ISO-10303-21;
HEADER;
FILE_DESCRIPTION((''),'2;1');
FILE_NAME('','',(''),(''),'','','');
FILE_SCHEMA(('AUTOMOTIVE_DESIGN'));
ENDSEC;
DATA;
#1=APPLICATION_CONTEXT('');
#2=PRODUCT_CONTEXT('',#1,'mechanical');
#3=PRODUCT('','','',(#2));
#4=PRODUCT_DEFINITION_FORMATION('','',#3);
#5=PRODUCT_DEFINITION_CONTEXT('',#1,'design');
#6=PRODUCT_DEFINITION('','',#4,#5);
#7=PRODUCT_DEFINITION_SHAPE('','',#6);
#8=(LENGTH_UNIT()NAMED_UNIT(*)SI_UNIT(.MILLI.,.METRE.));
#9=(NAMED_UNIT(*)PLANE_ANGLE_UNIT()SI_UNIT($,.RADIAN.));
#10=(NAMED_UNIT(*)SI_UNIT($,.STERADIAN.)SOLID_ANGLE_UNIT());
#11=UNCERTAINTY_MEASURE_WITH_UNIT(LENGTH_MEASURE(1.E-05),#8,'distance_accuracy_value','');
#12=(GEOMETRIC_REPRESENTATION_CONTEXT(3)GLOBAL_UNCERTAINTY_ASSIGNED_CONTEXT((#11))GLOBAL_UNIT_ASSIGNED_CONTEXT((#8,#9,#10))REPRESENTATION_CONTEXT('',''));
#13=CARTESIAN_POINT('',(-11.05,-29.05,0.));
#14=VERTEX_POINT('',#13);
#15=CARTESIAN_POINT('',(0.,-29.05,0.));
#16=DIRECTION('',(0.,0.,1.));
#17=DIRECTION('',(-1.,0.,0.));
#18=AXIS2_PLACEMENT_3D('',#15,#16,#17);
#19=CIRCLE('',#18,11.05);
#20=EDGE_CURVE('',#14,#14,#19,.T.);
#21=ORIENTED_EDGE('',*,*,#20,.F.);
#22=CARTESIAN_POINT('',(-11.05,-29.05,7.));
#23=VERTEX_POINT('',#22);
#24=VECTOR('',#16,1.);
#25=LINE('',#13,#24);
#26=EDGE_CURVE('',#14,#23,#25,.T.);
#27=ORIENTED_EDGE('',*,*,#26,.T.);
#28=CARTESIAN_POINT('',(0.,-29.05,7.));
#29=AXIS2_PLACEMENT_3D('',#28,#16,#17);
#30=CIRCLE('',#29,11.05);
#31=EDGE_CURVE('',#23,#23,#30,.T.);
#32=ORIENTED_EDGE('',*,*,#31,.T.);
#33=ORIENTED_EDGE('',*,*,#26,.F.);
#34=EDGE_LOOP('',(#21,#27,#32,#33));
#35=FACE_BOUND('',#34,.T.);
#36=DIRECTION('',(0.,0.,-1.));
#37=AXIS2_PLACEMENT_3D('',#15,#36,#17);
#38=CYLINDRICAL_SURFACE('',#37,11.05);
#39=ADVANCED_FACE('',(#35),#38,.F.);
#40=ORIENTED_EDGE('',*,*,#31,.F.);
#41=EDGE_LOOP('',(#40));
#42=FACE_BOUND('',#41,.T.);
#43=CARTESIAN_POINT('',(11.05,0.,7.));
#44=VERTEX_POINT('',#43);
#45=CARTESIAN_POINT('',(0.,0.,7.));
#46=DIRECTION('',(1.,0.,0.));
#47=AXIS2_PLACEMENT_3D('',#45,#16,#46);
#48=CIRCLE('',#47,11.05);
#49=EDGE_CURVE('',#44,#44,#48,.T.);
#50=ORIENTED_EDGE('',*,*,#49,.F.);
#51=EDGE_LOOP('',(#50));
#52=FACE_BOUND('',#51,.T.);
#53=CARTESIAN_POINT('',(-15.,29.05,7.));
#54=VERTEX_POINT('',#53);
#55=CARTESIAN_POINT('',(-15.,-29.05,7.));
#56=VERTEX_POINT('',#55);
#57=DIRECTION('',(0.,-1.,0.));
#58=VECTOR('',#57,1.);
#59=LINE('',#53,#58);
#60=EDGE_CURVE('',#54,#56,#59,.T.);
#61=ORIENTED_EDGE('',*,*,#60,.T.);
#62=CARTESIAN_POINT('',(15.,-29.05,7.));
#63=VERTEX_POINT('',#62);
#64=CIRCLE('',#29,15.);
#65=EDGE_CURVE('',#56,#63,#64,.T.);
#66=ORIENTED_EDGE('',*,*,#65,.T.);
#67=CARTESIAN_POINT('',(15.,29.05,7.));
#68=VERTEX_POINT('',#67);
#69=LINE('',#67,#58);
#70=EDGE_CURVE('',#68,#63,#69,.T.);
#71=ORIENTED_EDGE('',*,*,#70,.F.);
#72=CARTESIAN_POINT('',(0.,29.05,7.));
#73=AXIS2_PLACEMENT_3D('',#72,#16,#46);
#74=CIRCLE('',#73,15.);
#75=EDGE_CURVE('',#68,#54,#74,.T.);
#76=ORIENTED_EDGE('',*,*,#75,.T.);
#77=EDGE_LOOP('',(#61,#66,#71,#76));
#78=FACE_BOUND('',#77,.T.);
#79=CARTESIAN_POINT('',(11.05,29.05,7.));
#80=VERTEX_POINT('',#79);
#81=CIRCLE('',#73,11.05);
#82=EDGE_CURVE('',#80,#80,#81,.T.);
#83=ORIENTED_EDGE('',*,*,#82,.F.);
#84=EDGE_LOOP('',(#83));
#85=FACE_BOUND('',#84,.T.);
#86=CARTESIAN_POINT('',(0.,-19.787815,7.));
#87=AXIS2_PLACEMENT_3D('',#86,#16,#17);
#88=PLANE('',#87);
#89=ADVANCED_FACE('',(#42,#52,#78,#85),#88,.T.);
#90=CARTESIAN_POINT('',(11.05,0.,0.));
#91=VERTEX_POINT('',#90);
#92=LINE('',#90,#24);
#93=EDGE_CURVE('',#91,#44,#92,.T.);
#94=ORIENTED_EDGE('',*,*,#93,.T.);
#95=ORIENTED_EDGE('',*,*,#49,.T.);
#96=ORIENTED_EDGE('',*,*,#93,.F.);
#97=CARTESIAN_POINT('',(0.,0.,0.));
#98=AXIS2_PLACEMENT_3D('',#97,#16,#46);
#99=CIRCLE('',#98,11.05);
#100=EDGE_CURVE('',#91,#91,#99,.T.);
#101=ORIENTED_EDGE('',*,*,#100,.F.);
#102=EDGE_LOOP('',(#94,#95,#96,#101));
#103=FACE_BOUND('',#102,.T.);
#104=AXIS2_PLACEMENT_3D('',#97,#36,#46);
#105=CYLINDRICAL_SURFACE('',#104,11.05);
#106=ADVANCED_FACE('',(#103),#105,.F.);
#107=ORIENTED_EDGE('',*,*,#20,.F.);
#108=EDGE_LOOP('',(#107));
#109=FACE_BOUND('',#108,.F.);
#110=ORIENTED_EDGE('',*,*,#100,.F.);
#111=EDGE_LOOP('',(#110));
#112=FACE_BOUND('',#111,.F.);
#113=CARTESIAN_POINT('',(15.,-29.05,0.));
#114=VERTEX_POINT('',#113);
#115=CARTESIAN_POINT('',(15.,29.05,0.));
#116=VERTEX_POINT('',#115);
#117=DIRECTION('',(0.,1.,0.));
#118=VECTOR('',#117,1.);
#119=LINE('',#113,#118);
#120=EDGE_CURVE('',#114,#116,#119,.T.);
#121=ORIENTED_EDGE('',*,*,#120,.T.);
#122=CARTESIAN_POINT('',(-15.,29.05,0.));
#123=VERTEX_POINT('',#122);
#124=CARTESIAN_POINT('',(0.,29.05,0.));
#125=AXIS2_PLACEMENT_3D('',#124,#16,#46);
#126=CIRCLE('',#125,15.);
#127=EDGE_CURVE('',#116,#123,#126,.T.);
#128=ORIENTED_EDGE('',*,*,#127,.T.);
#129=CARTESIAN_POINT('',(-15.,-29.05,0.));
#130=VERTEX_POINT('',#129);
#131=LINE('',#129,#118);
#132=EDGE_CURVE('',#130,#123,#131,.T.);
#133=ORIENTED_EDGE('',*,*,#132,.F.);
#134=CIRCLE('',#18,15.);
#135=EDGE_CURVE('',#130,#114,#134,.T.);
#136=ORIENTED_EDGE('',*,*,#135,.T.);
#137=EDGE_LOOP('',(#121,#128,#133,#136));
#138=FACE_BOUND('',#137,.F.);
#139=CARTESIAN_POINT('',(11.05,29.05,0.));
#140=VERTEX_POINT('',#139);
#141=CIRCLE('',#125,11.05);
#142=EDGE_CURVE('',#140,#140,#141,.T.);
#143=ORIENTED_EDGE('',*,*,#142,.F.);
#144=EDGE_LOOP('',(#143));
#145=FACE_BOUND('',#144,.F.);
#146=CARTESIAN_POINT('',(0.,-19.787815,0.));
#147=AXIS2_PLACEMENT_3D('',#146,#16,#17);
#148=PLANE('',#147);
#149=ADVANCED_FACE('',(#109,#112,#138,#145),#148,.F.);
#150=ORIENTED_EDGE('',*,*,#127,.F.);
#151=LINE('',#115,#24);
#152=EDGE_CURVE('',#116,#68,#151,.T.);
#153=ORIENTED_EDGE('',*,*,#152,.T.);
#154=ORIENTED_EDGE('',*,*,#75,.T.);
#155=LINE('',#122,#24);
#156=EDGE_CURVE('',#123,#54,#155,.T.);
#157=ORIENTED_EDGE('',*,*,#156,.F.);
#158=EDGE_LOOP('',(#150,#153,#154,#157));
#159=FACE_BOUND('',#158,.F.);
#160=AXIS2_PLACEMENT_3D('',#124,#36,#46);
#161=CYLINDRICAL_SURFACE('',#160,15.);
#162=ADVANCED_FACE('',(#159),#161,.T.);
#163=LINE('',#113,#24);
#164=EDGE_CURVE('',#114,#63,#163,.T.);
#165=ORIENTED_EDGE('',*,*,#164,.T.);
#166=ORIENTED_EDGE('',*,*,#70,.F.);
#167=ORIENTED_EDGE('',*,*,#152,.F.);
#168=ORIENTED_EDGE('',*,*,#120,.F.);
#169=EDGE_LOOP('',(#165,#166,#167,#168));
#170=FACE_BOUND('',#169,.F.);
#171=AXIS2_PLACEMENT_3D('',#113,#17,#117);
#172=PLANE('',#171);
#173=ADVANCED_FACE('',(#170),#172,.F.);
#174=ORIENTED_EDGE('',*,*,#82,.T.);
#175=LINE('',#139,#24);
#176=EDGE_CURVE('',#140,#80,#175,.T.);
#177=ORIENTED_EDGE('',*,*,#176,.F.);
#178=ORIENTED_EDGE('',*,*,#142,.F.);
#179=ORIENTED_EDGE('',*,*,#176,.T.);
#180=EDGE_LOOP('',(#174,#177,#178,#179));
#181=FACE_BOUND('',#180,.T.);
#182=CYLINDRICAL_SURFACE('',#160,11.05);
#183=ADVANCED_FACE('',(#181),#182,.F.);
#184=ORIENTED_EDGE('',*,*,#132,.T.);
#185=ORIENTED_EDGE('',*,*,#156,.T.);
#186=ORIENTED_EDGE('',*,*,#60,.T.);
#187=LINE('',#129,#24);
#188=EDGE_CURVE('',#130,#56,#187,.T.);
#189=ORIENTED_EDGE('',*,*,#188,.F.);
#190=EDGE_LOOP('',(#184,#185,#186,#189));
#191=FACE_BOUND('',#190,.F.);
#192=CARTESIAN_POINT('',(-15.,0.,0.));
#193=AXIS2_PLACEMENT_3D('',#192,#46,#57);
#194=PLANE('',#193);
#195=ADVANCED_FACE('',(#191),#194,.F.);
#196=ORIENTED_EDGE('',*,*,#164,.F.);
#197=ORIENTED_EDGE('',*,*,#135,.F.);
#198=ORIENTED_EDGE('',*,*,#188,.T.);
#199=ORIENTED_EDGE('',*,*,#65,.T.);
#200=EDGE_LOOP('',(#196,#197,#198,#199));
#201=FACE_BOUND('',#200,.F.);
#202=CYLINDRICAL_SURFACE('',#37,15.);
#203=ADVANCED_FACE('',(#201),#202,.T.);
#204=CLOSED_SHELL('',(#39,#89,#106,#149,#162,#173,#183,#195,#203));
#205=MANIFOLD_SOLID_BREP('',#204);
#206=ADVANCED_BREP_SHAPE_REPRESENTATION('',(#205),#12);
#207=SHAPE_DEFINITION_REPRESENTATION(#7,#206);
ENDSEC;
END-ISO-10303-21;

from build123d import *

# Parameters (mm, degrees)
F0_R     = 11.05
F1_DEPTH = 7
F2_DEPTH = 7
F3_COUNT = 2


with BuildPart() as f1:
    # F0 (on Top) → F1 (new body)
    with BuildSketch(Plane.XY):
        with BuildLine():
            ThreePointArc((-15, 0), (0, -15), (15, 0))
            ThreePointArc((15, 0), (0, 15), (-15, 0))
        make_face()
        Circle(F0_R, mode=Mode.SUBTRACT)
    extrude(amount=F1_DEPTH)



with BuildPart() as f2:
    # F0 (on Top) → F2 (new body, through all)
    with BuildSketch(Plane.XY):
        with BuildLine():
            ThreePointArc((-15, 0), (0, 15), (15, 0))
            Line((15, 0), (15, 29.05))
            ThreePointArc((15, 29.05), (0, 44.05), (-15, 29.05))
            Line((-15, 29.05), (-15, 0))
        make_face()
        with Locations((0, 29.05)):
            Circle(F0_R, mode=Mode.SUBTRACT)
    extrude(amount=F2_DEPTH)


with BuildPart() as f1_1:
    add(f1.part)

    add(f2.part)  # F3 merges F2
    # F3: F2 ×2 about axis
    f3_axis = Axis((0, 0, 0), (0, 0, 1))
    for i in range(1, F3_COUNT):
        add(f2.part.rotate(f3_axis, i * 360 / F3_COUNT))


solid = f1_1.part
